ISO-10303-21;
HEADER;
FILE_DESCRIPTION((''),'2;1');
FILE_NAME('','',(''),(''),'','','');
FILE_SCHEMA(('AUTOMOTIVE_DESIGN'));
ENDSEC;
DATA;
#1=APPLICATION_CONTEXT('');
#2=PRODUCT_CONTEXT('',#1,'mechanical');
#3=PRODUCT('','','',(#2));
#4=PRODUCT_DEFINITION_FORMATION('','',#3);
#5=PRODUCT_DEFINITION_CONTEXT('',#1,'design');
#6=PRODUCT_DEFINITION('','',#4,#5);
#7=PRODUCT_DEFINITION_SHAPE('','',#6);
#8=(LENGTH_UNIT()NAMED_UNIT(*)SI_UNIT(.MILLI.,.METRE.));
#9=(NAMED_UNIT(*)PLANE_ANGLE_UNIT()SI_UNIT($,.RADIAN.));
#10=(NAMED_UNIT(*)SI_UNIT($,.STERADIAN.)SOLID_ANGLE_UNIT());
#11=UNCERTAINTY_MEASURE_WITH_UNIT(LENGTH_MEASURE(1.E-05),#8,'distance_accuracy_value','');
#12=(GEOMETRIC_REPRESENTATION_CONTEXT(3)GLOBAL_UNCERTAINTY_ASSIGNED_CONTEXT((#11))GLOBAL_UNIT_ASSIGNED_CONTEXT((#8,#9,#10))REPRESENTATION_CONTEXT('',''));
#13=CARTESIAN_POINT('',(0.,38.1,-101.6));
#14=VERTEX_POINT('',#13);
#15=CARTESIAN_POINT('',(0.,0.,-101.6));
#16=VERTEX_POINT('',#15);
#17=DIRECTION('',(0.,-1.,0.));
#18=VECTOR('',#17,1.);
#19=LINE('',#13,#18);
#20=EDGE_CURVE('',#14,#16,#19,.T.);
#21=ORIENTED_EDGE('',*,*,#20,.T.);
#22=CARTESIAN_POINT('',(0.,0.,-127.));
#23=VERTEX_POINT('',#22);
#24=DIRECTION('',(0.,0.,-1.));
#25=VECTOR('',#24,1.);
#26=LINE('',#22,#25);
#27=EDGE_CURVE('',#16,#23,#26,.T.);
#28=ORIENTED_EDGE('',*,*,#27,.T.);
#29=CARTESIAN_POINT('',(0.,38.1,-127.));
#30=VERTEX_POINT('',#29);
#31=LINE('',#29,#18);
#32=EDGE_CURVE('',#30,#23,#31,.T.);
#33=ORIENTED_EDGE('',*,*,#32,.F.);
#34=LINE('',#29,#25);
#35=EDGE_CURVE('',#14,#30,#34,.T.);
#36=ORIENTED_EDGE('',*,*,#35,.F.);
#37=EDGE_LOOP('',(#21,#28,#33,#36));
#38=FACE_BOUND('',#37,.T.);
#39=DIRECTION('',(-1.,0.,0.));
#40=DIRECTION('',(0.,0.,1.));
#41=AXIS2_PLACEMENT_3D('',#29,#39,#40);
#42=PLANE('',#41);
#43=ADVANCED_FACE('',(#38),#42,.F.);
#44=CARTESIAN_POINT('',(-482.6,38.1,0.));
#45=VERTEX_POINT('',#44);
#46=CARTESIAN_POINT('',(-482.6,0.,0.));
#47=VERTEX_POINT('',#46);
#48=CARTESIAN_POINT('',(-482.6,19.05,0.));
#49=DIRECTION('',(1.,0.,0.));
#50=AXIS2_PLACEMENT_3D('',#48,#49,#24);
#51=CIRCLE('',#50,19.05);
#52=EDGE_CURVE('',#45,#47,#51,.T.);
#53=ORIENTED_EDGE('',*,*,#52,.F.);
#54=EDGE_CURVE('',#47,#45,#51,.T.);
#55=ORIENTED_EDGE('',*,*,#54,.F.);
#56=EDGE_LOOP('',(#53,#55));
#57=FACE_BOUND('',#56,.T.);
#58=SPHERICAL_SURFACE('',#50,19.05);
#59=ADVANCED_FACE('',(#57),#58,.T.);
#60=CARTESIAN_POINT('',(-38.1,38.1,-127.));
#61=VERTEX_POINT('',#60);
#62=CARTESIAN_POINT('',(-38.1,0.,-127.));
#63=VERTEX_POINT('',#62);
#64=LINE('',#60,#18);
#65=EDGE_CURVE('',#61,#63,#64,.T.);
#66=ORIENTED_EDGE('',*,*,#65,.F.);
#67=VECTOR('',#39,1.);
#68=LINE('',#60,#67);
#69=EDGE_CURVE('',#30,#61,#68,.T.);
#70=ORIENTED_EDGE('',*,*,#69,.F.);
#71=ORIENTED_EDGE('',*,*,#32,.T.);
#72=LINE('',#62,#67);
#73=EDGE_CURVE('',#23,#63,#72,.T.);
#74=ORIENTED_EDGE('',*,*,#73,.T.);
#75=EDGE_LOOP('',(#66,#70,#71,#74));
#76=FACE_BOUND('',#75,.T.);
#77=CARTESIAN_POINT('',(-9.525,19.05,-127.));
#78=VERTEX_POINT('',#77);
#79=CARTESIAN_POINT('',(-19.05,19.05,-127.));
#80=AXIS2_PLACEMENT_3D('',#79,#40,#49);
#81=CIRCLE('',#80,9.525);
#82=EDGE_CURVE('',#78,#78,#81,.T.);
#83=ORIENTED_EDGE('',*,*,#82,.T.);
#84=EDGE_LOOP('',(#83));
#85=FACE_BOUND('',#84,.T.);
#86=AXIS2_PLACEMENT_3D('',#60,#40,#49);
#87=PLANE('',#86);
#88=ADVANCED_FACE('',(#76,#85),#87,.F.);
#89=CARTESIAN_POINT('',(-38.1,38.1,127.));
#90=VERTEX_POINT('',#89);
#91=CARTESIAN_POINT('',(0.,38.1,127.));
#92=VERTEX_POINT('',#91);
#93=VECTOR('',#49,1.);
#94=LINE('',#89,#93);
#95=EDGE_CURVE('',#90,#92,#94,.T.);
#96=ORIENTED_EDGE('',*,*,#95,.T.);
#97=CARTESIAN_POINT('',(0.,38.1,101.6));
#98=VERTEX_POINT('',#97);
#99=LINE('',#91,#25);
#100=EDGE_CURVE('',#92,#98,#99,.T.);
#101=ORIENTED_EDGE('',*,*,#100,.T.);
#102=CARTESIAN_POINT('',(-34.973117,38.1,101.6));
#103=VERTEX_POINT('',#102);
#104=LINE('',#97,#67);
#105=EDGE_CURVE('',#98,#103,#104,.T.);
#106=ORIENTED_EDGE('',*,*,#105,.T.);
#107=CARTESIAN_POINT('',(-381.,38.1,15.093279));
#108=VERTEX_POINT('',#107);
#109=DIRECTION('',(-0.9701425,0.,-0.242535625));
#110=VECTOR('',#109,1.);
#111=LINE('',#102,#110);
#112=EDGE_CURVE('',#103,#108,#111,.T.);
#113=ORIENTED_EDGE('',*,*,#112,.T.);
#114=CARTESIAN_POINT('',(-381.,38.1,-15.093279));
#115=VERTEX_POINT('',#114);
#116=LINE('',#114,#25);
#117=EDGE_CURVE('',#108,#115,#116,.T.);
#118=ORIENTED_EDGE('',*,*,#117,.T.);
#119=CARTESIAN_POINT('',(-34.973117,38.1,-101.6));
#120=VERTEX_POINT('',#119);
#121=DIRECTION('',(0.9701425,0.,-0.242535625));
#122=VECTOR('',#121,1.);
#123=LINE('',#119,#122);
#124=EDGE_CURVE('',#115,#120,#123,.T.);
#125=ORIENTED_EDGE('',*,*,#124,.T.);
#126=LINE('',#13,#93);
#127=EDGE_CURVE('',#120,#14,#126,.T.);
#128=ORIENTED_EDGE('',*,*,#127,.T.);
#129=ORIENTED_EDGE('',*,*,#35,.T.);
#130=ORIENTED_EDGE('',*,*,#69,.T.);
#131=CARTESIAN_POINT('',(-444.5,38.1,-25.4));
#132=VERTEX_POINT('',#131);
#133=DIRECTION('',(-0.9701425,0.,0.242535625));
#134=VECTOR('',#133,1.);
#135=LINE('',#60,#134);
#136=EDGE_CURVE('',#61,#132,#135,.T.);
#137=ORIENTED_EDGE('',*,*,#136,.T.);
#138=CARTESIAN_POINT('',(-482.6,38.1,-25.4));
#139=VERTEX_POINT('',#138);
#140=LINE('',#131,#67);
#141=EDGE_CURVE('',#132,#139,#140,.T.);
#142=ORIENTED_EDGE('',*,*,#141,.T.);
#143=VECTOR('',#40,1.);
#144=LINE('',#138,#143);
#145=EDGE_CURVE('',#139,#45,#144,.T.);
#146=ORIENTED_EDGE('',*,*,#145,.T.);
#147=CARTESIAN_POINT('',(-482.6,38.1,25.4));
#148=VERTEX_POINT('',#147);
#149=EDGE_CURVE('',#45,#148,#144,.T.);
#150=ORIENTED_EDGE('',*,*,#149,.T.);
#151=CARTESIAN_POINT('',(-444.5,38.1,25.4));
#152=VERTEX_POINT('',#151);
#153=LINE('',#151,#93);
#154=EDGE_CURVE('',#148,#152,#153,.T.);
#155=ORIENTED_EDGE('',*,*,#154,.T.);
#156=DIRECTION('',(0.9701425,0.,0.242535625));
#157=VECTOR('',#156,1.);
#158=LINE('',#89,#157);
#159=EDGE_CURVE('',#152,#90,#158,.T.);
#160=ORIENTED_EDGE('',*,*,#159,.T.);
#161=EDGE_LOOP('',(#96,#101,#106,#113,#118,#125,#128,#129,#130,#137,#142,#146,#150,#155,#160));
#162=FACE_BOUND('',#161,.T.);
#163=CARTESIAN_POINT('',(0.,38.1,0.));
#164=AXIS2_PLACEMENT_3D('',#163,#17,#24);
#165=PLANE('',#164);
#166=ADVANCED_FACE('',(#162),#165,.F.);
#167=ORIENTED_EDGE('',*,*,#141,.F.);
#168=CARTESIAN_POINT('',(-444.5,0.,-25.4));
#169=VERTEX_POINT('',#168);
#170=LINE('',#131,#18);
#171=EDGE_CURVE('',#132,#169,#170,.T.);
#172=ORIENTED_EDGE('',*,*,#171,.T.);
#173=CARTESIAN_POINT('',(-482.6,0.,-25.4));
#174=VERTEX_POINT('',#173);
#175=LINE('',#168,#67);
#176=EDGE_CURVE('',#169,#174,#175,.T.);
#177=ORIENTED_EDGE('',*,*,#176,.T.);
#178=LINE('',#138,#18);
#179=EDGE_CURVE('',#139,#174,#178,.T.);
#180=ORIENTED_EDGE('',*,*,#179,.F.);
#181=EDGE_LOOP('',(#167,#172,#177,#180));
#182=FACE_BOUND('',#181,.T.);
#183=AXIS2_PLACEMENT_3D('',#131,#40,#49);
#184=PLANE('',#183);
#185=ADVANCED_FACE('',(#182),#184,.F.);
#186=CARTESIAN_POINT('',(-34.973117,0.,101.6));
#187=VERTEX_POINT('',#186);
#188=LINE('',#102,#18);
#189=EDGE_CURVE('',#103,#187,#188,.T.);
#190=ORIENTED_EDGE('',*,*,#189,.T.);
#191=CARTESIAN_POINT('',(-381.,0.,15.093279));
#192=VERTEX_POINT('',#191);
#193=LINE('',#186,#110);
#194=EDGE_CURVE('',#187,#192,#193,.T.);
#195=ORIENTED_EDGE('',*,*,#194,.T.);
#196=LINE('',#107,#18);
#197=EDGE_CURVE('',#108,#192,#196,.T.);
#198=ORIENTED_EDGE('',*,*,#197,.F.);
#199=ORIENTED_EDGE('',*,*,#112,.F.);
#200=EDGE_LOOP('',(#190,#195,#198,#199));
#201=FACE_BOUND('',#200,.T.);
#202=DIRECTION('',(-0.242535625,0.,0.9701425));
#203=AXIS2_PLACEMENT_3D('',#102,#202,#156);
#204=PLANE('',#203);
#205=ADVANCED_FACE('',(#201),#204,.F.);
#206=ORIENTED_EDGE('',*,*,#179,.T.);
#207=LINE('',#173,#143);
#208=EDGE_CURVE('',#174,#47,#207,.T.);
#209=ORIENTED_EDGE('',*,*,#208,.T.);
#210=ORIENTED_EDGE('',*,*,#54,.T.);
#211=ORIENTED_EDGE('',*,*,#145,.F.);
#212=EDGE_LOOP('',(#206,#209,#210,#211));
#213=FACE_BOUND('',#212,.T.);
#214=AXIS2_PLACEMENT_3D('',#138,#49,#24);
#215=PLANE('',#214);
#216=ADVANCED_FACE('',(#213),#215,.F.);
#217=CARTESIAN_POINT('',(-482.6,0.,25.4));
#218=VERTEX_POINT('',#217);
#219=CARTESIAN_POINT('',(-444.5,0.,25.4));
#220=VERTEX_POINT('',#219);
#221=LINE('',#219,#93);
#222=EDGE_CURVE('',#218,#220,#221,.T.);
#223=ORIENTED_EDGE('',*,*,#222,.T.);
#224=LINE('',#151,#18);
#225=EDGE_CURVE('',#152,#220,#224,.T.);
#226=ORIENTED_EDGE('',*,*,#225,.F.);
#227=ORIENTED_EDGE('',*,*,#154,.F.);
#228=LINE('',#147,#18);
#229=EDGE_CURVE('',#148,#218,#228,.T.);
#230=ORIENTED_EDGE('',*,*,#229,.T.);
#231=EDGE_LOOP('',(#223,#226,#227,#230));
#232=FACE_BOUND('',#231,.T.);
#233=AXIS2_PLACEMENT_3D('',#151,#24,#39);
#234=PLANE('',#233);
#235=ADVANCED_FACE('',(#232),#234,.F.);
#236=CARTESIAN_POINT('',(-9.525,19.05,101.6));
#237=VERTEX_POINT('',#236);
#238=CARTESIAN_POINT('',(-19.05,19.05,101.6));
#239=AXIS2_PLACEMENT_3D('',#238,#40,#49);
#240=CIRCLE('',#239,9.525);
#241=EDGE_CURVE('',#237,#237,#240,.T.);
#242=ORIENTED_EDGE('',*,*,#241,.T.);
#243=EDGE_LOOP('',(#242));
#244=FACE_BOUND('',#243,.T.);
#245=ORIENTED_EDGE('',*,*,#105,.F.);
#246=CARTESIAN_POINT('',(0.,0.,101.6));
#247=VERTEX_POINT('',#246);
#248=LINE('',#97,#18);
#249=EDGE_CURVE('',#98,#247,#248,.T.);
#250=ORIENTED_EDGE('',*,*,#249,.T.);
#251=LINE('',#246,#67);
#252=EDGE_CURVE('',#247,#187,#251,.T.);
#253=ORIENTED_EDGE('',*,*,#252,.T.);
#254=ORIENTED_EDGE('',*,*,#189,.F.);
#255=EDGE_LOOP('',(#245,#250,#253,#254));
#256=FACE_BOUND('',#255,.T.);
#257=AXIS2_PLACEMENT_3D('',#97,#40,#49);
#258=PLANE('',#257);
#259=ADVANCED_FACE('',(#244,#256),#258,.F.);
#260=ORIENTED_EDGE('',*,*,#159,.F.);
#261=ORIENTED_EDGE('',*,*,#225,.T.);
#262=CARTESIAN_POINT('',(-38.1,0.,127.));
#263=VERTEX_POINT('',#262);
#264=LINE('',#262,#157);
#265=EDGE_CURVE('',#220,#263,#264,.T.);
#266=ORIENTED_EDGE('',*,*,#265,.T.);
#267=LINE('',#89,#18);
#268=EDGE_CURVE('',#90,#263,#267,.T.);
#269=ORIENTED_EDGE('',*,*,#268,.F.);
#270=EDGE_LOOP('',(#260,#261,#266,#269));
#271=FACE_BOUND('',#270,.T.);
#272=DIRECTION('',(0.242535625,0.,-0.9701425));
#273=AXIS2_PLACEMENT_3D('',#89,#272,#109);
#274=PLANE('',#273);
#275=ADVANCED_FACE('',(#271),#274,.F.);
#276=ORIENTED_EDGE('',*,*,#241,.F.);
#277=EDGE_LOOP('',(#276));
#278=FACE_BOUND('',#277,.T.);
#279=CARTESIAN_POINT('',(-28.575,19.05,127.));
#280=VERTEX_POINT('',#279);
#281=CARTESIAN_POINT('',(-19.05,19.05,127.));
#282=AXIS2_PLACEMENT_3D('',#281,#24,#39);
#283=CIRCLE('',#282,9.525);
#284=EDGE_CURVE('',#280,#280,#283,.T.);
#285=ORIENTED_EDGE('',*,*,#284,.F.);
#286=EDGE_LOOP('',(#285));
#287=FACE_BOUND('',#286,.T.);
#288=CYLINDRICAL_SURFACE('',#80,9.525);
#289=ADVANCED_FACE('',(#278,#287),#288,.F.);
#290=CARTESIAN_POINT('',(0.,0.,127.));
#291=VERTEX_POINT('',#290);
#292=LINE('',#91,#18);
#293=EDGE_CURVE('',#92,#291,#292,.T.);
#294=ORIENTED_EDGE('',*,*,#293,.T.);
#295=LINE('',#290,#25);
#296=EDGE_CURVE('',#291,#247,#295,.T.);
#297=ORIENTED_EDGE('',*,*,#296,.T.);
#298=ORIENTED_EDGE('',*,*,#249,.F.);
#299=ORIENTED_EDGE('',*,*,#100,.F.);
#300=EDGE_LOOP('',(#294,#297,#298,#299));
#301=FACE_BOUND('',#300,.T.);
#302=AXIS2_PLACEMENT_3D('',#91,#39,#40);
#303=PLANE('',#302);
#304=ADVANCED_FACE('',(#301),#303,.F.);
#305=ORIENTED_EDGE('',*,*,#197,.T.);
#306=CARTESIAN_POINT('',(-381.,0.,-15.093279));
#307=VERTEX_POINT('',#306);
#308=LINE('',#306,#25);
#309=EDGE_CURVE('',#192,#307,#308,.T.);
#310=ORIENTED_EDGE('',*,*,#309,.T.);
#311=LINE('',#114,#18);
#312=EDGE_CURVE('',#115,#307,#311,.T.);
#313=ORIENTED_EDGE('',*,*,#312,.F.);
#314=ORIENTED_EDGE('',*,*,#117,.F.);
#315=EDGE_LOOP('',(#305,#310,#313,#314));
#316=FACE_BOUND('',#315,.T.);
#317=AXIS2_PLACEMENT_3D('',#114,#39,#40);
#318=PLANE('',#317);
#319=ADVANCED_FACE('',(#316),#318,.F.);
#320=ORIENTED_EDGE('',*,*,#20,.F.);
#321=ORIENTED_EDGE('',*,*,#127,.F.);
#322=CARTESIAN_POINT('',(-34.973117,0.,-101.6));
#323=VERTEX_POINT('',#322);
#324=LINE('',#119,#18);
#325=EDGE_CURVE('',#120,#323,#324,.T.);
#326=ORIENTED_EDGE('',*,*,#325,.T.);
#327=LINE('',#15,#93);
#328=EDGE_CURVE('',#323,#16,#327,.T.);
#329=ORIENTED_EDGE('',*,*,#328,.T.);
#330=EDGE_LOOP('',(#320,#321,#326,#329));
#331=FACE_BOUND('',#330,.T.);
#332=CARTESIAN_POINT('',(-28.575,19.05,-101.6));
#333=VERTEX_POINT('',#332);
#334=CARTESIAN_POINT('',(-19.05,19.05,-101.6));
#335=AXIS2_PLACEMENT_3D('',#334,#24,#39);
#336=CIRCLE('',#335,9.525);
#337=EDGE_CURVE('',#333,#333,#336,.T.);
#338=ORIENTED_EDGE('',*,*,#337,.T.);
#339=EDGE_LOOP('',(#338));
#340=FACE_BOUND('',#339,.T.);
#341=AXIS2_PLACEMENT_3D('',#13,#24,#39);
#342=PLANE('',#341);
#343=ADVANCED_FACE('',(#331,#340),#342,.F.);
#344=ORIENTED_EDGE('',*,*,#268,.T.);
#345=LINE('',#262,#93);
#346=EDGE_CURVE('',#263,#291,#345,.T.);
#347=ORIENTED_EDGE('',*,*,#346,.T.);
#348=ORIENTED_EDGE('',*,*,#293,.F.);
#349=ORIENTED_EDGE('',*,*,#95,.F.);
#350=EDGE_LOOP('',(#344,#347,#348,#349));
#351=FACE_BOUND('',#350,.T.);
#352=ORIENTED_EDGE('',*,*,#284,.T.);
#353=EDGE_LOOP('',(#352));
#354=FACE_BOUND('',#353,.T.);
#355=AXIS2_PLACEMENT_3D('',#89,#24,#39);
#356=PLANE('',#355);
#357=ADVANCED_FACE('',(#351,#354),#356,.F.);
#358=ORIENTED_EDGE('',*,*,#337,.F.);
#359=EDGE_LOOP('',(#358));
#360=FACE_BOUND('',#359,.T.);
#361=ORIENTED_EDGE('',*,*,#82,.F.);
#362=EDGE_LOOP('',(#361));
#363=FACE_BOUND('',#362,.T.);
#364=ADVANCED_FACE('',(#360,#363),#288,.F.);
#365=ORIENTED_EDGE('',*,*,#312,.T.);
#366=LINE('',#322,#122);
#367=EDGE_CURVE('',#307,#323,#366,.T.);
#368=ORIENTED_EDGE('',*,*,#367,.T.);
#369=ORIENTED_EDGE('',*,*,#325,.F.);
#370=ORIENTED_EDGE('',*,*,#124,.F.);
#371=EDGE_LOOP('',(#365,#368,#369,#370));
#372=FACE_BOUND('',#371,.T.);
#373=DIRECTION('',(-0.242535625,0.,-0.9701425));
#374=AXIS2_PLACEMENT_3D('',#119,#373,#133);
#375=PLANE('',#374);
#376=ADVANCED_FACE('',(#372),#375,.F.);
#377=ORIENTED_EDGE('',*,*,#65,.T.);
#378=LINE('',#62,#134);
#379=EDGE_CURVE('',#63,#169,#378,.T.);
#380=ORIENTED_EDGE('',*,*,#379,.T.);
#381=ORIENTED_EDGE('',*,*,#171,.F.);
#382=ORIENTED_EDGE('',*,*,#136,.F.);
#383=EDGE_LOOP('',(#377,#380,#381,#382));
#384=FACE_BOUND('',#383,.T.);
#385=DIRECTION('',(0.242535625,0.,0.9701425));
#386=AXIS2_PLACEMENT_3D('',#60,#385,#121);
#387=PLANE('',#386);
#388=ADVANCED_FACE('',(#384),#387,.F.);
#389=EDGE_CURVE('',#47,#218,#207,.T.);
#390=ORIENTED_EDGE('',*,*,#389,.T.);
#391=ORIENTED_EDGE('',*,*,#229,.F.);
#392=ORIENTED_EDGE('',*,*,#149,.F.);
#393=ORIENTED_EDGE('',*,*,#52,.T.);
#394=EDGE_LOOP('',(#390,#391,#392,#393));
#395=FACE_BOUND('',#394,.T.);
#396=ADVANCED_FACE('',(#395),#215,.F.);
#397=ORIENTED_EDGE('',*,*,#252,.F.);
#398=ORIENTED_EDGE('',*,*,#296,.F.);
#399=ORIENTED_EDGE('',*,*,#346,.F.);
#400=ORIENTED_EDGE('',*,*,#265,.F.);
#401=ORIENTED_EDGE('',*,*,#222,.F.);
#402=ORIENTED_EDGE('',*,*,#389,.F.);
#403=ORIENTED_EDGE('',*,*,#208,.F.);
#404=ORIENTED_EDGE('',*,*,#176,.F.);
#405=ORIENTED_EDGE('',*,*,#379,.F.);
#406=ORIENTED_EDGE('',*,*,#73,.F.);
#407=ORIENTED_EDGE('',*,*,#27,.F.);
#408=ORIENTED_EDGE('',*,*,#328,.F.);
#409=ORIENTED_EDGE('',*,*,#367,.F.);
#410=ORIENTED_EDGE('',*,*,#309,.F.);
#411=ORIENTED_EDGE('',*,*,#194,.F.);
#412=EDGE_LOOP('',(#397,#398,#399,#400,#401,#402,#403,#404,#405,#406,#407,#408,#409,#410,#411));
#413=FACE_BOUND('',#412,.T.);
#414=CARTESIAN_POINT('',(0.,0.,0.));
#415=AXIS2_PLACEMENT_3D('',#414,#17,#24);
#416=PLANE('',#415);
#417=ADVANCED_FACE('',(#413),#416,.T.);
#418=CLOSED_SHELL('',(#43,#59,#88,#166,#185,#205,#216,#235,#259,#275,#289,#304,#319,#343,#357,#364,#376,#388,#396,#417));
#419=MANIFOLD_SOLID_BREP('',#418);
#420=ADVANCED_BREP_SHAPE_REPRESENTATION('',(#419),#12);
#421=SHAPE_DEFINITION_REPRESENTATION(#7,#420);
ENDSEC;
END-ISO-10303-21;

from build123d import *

# Parameters (mm, degrees)
BOSS_EXTRUDE1_DEPTH     = 38.1
CUT_EXTRUDE1_DEPTH      = 564.578151191
CUT_EXTRUDE1_DEPTH_BACK = 564.578151191
SKETCH3_R               = 9.525


with BuildPart() as part:
    # Sketch1 → Boss-Extrude1 (new body)
    with BuildSketch(Plane(origin=(0, 0, 0), x_dir=(1, 0, 0), z_dir=(0, 1, 0))):
        Polygon((-38.1, 127), (-444.5, 25.4), (-482.6, 25.4), (-482.6, -25.4), (-444.5, -25.4), (-38.1, -127), (0, -127), (0, -101.6), (-34.973117109, -101.6), (-381, -15.093279277), (-381, 15.093279277), (-34.973117109, 101.6), (0, 101.6), (0, 127), align=None)
    extrude(amount=BOSS_EXTRUDE1_DEPTH)


with BuildPart() as revolve1_tool:
    # Sketch2 → Revolve1 (revolve)
    with BuildSketch(Plane.XY):
        with BuildLine():
            Line((-482.6, 0), (-482.6, 38.1))
            ThreePointArc((-482.6, 38.1), (-501.65, 19.05), (-482.6, 0))
        make_face()
    revolve(axis=Axis((-482.6, 38.1, 0), (0, -1, 0)))


with BuildPart() as part_1:
    add(part.part)


with BuildPart() as part_2:
    # Revolve1: joined with revolve1_tool
    add(part_1.part.fuse(revolve1_tool.part, tol=0.00001))

    # Sketch3 → Cut-Extrude1 (cut, two sides: drawn at the far end of the back side and taken through both)
    with BuildSketch(Plane.XY.offset(127).offset(-CUT_EXTRUDE1_DEPTH_BACK)):
        with Locations((-19.05, 19.05)):
            Circle(SKETCH3_R)
    extrude(amount=CUT_EXTRUDE1_DEPTH + CUT_EXTRUDE1_DEPTH_BACK, mode=Mode.SUBTRACT)


solid = part_2.part
